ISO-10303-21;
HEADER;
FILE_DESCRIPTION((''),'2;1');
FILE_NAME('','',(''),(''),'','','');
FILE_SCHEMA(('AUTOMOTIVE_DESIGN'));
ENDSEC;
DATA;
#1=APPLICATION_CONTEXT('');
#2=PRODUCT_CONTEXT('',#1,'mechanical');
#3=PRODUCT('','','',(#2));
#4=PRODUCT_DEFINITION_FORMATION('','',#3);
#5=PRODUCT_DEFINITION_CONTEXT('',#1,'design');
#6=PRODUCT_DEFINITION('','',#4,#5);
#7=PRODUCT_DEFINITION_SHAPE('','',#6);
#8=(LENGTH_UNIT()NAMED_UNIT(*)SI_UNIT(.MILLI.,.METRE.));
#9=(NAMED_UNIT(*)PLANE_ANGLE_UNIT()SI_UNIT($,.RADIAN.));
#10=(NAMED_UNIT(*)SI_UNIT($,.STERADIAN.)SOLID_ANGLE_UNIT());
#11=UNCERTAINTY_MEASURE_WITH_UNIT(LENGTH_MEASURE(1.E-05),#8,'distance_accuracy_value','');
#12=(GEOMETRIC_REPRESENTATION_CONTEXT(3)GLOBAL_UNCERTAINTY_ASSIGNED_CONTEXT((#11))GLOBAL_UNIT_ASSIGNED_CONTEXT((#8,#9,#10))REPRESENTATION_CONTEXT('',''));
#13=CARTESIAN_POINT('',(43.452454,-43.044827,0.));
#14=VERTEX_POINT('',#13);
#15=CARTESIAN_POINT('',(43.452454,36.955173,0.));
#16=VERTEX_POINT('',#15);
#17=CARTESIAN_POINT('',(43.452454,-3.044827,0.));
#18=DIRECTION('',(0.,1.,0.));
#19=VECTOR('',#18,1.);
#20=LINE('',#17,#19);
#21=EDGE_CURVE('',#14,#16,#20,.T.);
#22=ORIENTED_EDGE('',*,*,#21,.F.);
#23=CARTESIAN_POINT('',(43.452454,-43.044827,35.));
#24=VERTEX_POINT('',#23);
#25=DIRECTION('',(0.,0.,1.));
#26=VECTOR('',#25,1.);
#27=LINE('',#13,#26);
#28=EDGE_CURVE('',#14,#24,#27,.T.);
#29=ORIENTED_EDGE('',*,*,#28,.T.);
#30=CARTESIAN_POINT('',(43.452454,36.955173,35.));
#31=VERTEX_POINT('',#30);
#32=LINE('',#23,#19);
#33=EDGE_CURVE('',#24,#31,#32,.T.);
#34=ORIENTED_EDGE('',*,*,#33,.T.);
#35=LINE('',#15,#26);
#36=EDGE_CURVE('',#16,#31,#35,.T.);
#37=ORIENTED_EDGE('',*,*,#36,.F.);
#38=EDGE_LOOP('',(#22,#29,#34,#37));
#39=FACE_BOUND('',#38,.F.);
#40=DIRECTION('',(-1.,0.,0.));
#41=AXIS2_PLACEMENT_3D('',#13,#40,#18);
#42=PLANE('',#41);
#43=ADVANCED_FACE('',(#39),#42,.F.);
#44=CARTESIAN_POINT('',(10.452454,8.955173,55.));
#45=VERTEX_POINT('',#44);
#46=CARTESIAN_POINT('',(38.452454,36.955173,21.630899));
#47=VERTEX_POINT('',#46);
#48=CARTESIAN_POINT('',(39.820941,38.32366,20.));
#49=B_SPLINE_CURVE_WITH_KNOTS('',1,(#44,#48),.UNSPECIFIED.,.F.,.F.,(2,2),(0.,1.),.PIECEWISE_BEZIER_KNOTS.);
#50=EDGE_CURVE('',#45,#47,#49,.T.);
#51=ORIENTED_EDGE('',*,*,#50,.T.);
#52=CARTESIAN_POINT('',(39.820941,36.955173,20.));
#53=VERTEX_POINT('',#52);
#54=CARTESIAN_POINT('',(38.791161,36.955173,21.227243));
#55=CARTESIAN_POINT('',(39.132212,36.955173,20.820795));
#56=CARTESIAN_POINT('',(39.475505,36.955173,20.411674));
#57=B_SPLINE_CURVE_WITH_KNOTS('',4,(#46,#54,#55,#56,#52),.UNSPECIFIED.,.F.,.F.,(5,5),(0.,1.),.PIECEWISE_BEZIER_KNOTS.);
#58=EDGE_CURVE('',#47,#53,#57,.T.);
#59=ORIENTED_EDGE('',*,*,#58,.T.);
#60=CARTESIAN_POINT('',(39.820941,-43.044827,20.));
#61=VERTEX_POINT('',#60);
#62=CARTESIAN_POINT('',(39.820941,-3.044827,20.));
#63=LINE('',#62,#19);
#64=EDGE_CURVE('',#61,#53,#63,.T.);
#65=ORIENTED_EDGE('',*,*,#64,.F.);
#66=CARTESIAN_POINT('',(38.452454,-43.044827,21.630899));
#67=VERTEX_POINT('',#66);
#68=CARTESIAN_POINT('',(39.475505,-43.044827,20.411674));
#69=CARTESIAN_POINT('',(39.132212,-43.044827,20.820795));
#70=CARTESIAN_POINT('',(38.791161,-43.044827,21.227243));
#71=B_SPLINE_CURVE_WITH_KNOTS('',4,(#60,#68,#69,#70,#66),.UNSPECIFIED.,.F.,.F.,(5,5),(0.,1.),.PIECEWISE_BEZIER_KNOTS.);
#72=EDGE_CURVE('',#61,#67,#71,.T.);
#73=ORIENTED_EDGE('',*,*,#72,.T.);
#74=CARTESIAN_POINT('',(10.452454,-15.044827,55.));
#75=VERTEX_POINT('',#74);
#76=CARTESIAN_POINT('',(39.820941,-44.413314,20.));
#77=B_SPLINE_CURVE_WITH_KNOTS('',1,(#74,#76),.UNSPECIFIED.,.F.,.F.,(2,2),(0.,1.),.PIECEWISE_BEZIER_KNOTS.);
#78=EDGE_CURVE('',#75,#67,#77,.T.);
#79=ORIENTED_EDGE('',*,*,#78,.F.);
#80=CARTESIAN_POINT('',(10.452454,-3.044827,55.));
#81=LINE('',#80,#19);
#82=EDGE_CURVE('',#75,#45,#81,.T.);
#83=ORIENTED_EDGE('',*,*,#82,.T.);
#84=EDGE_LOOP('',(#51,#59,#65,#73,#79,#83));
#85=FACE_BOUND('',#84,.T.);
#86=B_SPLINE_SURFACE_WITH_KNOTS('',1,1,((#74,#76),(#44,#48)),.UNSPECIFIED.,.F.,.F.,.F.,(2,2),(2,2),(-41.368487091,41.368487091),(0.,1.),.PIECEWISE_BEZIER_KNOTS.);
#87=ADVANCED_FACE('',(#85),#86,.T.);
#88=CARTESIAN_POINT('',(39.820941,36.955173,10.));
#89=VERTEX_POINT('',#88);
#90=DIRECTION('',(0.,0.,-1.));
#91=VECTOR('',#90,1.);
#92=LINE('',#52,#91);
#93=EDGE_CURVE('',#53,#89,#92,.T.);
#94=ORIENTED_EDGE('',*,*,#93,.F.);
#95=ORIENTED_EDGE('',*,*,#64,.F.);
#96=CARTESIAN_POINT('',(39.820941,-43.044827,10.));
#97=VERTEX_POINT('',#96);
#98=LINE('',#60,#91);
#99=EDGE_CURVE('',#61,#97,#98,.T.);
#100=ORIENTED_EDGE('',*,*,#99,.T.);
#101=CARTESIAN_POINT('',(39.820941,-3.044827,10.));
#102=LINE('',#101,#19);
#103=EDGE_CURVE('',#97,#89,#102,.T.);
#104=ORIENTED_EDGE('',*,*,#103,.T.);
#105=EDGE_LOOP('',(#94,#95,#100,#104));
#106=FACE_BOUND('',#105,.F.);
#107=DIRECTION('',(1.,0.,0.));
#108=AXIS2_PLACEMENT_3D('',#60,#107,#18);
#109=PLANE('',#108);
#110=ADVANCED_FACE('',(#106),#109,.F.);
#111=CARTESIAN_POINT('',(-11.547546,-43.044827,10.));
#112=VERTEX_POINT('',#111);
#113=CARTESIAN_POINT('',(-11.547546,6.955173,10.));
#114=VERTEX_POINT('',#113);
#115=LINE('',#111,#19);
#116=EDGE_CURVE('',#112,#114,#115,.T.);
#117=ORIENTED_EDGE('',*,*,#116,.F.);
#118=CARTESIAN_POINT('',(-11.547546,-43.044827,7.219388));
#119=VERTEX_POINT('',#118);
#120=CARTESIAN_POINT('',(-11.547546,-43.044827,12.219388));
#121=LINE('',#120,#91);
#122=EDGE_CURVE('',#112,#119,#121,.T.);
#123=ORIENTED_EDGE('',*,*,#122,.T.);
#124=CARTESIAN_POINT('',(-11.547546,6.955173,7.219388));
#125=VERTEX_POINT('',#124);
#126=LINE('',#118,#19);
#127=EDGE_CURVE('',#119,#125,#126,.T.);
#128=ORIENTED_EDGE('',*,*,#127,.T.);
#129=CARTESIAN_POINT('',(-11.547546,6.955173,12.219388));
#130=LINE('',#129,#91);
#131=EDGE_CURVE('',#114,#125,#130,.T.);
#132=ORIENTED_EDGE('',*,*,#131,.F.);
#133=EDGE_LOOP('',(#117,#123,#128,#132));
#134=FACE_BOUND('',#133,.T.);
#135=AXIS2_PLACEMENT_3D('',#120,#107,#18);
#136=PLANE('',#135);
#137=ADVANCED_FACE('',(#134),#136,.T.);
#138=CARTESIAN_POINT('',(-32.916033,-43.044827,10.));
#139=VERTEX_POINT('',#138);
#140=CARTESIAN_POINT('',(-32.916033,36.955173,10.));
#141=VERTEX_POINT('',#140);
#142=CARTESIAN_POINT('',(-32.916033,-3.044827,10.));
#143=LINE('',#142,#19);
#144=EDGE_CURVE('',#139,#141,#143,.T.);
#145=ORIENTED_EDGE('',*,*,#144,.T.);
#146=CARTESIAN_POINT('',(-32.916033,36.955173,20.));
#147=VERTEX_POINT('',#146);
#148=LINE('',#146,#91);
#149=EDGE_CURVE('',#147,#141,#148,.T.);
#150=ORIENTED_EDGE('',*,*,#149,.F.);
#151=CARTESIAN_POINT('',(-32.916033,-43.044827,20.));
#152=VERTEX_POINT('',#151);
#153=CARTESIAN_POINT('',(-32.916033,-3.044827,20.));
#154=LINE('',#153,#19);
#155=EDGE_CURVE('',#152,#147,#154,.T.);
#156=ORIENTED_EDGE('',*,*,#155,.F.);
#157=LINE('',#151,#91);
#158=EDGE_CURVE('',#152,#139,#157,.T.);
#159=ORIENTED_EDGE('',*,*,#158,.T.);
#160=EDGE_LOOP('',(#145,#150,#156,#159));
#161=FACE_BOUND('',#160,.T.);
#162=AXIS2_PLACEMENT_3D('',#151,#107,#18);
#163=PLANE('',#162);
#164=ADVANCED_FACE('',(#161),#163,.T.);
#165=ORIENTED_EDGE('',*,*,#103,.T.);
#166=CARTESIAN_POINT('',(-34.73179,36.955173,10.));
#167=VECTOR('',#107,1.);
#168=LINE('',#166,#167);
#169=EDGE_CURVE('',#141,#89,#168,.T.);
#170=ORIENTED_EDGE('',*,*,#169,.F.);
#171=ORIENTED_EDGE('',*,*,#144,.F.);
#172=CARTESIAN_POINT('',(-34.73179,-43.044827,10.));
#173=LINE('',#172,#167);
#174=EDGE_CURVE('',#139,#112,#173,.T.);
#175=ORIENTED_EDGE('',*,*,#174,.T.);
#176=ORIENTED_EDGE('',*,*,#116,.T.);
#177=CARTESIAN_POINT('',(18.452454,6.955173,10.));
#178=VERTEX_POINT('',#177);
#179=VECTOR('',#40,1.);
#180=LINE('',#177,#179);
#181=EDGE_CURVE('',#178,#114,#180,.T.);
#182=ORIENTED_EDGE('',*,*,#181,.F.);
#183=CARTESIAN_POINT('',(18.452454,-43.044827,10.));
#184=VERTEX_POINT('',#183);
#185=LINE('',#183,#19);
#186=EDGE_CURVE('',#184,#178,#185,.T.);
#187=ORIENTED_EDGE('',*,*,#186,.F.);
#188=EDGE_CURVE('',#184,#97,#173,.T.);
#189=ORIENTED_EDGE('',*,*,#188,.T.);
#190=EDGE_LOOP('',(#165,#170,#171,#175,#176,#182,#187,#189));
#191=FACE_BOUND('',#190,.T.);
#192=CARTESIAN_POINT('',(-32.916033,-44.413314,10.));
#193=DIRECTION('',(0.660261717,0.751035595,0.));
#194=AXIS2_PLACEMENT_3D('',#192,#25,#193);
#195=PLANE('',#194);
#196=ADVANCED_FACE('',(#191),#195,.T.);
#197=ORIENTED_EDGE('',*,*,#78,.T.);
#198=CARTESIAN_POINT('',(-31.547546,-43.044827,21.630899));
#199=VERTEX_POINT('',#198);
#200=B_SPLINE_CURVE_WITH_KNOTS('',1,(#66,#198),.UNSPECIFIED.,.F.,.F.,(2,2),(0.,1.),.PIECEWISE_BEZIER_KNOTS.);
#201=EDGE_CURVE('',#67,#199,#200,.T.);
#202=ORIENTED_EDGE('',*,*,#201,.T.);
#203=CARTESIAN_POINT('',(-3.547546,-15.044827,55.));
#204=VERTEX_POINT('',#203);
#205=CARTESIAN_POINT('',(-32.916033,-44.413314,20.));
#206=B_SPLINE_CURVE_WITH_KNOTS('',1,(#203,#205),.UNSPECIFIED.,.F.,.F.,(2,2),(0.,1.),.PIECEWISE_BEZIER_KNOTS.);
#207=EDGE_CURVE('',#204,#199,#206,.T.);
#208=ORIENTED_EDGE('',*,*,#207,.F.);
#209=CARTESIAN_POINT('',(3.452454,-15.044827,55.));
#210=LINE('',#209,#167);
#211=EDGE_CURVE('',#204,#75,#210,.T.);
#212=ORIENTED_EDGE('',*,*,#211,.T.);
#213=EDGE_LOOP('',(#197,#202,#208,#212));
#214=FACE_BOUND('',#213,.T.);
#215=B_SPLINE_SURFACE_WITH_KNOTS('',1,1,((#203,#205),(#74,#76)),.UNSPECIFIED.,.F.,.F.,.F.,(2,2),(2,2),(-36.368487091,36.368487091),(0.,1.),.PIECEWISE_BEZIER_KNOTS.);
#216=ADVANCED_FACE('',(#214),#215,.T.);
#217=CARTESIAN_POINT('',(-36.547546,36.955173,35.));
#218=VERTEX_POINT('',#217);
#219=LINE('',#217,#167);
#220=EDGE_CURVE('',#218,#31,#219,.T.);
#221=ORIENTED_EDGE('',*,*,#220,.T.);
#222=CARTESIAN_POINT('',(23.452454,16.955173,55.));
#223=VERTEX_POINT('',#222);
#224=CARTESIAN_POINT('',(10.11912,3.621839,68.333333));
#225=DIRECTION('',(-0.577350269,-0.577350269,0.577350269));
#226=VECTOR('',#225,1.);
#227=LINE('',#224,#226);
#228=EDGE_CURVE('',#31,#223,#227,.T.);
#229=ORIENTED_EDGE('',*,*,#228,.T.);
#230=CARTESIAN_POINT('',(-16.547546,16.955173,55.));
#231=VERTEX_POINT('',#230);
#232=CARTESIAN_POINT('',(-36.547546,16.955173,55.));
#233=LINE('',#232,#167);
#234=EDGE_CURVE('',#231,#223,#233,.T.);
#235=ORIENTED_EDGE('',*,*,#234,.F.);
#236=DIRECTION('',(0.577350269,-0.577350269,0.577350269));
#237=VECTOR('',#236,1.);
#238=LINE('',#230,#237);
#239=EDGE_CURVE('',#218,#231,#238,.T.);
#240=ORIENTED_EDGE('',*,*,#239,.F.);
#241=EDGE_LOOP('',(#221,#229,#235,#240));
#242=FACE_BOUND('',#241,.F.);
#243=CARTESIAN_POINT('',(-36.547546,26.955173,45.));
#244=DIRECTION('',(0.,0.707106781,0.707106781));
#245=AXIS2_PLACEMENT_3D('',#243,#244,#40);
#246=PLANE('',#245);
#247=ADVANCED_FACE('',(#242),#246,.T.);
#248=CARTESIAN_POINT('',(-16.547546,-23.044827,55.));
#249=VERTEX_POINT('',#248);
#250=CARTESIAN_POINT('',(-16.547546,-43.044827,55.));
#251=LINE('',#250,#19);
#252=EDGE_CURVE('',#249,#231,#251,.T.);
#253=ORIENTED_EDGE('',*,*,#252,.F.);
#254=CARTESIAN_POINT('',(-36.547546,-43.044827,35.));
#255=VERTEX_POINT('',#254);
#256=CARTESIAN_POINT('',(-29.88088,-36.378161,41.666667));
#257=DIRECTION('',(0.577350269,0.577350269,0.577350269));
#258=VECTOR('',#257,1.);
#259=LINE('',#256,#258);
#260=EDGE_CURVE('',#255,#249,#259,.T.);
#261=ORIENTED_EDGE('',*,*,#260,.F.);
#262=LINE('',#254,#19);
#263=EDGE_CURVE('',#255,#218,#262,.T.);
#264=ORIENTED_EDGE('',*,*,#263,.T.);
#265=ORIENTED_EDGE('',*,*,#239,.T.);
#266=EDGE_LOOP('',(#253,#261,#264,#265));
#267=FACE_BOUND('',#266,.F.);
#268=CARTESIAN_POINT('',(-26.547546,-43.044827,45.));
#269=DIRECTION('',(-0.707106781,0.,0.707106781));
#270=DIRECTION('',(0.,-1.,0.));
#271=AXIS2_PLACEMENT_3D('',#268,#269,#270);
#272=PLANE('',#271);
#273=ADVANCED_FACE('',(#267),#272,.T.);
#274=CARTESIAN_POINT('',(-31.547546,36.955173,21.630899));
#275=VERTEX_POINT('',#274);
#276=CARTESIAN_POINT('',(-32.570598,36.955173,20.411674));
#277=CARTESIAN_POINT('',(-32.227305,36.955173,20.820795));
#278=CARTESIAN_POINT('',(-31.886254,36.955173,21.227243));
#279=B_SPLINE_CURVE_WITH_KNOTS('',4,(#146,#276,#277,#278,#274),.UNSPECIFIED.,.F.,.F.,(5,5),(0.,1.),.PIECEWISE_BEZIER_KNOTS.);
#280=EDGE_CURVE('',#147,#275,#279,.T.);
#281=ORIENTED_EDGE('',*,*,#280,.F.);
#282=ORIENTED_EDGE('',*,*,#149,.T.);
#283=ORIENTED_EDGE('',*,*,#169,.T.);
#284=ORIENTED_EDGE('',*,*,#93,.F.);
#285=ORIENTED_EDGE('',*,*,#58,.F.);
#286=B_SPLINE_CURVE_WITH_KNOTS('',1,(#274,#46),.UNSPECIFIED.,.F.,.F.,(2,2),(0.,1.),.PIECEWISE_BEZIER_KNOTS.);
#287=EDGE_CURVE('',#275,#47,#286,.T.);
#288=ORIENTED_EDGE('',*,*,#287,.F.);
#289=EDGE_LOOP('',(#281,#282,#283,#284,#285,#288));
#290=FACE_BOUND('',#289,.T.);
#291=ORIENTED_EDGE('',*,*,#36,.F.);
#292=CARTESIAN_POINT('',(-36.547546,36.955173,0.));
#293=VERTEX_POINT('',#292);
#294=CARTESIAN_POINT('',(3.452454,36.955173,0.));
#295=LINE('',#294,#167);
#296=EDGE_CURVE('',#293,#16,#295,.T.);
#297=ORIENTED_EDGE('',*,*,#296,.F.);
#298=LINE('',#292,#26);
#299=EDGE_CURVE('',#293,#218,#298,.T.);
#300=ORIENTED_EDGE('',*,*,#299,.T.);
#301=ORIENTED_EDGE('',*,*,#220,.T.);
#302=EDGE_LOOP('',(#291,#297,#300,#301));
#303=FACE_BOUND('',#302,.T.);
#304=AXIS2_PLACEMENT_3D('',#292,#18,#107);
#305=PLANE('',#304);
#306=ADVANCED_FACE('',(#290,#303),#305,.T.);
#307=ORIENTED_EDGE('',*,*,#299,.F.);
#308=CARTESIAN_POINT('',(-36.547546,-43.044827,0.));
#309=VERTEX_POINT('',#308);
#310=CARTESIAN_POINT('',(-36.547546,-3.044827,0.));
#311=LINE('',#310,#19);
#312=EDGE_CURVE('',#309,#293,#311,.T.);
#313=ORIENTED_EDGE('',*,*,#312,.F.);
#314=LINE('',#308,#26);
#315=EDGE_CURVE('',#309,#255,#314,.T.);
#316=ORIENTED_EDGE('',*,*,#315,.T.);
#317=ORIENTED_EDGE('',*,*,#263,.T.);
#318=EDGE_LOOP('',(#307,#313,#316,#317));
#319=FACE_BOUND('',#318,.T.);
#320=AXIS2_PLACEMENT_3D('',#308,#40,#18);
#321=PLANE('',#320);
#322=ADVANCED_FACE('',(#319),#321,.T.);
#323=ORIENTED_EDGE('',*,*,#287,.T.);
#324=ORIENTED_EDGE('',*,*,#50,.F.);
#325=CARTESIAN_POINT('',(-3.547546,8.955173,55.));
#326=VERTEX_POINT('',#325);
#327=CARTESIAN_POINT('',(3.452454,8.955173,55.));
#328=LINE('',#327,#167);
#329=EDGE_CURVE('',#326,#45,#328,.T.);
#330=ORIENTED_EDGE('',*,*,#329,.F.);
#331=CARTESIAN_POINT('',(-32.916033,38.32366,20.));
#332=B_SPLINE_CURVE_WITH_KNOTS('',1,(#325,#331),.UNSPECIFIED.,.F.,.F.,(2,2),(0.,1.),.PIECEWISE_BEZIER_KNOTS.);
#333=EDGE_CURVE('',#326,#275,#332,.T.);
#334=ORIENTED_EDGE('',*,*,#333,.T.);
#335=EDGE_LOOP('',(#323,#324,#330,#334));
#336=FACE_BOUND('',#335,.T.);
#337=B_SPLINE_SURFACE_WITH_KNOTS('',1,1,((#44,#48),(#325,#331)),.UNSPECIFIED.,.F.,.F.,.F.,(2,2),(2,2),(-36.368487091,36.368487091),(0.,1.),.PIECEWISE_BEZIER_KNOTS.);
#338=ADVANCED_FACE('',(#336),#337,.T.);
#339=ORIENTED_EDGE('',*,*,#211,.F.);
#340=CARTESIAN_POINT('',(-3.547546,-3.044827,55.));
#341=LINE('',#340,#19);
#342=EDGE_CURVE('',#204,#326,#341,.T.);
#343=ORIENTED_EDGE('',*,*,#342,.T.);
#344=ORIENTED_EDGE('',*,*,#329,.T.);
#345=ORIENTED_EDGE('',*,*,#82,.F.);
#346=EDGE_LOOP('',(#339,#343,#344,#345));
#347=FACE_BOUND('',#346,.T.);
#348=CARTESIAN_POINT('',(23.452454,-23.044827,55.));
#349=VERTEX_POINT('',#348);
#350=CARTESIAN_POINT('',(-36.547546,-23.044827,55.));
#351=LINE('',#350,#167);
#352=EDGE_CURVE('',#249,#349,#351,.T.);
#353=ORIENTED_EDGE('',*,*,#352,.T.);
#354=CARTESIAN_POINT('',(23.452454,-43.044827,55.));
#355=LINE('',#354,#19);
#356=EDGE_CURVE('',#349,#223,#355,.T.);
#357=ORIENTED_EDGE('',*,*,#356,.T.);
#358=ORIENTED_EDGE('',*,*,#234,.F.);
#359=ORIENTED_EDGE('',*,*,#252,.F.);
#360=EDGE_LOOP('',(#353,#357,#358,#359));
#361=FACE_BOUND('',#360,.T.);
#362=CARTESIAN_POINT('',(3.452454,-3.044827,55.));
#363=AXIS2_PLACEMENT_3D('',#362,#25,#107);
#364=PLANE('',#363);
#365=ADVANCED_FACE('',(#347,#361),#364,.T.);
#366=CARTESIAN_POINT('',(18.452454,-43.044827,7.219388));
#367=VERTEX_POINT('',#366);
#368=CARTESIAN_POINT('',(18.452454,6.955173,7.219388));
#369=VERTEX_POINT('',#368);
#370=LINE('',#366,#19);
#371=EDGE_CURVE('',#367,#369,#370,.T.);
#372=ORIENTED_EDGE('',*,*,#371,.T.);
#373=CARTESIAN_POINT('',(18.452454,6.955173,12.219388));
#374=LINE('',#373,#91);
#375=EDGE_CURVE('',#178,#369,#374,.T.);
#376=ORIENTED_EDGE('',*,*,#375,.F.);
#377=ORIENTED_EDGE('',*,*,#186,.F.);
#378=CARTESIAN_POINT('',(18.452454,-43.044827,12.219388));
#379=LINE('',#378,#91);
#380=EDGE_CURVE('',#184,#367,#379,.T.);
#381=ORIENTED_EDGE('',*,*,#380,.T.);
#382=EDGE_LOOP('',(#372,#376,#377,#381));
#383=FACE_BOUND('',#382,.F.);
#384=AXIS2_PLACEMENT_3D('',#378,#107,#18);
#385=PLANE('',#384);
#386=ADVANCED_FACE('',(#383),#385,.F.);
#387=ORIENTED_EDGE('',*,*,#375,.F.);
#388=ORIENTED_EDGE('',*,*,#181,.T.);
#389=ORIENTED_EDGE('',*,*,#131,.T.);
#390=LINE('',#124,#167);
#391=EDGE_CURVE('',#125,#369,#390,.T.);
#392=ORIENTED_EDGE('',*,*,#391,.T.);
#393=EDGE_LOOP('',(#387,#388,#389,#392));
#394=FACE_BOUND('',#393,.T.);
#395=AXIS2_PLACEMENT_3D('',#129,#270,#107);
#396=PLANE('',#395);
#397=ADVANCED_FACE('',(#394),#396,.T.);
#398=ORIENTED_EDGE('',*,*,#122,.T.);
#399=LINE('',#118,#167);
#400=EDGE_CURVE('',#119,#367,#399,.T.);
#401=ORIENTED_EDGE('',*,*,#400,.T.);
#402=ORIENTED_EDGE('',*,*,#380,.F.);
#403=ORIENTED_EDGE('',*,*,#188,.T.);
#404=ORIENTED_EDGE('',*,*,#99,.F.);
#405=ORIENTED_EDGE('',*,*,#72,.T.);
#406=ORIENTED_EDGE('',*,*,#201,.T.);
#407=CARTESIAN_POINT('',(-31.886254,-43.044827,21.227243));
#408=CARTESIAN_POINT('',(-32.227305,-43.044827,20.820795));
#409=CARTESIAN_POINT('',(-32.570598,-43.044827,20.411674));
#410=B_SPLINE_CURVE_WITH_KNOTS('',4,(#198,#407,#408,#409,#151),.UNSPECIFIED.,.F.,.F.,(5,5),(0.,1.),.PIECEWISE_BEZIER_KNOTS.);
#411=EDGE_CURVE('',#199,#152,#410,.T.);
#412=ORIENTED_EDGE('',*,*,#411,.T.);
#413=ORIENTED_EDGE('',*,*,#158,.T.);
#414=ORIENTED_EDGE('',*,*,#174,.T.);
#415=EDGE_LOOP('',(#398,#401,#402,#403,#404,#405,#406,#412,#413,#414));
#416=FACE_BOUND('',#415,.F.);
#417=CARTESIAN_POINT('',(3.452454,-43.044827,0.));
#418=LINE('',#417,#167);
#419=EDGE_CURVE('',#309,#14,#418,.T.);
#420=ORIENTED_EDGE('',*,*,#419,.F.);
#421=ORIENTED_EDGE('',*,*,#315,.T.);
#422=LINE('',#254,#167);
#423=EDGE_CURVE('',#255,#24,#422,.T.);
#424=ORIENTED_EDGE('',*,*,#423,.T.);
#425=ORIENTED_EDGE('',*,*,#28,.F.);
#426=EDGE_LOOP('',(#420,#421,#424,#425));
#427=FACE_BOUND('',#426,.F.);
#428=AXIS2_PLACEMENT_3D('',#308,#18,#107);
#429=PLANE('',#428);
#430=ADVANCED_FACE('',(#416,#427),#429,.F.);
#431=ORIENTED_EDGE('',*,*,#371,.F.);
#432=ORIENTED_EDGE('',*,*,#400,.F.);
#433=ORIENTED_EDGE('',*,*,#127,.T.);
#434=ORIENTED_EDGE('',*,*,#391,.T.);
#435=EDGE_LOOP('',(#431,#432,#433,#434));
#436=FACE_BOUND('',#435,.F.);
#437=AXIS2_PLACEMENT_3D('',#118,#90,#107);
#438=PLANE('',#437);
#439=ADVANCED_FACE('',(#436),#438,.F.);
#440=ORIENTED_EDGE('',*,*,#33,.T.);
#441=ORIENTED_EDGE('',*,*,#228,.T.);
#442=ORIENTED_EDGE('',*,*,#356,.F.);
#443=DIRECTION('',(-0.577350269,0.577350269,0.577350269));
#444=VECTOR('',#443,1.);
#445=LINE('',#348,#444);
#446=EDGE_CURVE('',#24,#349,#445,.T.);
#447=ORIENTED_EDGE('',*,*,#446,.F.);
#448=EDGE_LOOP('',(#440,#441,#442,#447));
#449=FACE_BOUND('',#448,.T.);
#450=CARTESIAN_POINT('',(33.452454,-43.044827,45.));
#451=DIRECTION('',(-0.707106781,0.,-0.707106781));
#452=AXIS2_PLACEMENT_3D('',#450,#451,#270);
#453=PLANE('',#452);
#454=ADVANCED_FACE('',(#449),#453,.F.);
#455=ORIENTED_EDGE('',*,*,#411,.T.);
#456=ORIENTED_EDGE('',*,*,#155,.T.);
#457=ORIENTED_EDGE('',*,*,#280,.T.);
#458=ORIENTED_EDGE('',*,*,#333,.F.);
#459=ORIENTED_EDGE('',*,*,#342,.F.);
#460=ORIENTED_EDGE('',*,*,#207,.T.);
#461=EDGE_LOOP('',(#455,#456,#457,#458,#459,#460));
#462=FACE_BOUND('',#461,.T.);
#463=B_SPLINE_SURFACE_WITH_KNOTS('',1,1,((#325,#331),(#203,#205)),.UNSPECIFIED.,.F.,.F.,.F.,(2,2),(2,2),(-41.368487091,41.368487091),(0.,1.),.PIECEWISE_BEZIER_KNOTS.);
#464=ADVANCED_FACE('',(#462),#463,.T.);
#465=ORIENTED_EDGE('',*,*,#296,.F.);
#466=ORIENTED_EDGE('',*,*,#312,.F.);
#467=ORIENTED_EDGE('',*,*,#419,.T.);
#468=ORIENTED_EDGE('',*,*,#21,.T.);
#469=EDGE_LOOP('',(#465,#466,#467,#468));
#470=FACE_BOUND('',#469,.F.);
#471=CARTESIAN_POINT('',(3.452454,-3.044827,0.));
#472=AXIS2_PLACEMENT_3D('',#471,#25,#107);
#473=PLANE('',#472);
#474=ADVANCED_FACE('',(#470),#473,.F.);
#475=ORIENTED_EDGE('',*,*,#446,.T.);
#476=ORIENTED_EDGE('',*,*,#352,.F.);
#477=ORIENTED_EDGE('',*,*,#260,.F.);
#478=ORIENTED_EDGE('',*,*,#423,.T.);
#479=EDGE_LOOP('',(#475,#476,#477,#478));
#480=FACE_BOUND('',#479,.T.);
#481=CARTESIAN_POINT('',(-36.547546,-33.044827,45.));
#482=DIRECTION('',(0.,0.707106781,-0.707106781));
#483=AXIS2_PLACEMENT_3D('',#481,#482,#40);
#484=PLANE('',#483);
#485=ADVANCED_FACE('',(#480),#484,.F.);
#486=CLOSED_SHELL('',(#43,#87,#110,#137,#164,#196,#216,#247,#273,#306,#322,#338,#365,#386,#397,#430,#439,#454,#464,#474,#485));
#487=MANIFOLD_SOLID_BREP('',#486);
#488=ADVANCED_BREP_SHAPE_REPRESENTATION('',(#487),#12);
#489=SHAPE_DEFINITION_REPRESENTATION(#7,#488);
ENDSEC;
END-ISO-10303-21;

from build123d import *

# Parameters (mm, degrees)
F0_W     = 80
F0_H     = 80
F1_DEPTH = 55
F2_SIZE2 = 20
F2_SIZE  = 20
F3_W     = 14
F3_H     = 24
F4_DEPTH = 35
F4_TAPER = -40
F5_W     = 15
F5_H     = 2.5
F5_H_2   = 5.2806121111
F6_DEPTH = 50
F7_DEPTH = 10
F8_DEPTH = 5


# Not quite as in the source:
# - a feature names something its author has since deleted; it is built from what else it names


with BuildPart() as f1:
    # F0 (on Top) → F1 (new body)
    with BuildSketch(Plane.XY):
        with Locations((3.4524537623, -3.0448271871)):
            Rectangle(F0_W, F0_H)
    extrude(amount=F1_DEPTH)

    # F2
    f2_edges = [f1.edges().sort_by_distance(p)[0] for p in [
        (43.452454, -3.044827, 55),
        (3.452454, 36.955173, 55),
        (-36.547546, -3.044827, 55),
        (3.452454, -43.044827, 55),
    ]]
    chamfer(f2_edges, length=F2_SIZE, length2=F2_SIZE2)

    # F3 (on face) → F4 (cut)
    with BuildSketch(Plane.XY.offset(55)):
        with Locations((3.4524537623, -3.0448271871)):
            Rectangle(F3_W, F3_H)
    extrude(amount=-F4_DEPTH, taper=F4_TAPER, mode=Mode.SUBTRACT)

    # F5 (on face) → F6 (cut)
    with BuildSketch(Plane.XZ.offset(43.0448271871)):
        with Locations((10.9524537623, 18.75)):
            Rectangle(F5_W, F5_H)
        with Locations((-4.0475462377, 18.75)):
            Rectangle(F5_W, F5_H)
        with Locations((-4.0475462377, 14.8596939445)):
            Rectangle(F5_W, F5_H_2)
        with Locations((10.9524537623, 14.8596939445)):
            Rectangle(F5_W, F5_H_2)
    extrude(amount=-F6_DEPTH, mode=Mode.SUBTRACT)

    # F7 (cut): a face of the model
    f7_faces = [f1.faces().sort_by_distance(p)[0] for p in [
        (3.4524537623, 35.8739389153, 20),
    ]]
    extrude(f7_faces, amount=-F7_DEPTH, mode=Mode.SUBTRACT)

    # F8 (cut): a face of the model
    f8_faces = [f1.faces().sort_by_distance(p)[0] for p in [
        (3.4524537623, -18.0448271871, 12.2193878889),
    ]]
    extrude(f8_faces, amount=-F8_DEPTH, mode=Mode.SUBTRACT)


solid = f1.part
